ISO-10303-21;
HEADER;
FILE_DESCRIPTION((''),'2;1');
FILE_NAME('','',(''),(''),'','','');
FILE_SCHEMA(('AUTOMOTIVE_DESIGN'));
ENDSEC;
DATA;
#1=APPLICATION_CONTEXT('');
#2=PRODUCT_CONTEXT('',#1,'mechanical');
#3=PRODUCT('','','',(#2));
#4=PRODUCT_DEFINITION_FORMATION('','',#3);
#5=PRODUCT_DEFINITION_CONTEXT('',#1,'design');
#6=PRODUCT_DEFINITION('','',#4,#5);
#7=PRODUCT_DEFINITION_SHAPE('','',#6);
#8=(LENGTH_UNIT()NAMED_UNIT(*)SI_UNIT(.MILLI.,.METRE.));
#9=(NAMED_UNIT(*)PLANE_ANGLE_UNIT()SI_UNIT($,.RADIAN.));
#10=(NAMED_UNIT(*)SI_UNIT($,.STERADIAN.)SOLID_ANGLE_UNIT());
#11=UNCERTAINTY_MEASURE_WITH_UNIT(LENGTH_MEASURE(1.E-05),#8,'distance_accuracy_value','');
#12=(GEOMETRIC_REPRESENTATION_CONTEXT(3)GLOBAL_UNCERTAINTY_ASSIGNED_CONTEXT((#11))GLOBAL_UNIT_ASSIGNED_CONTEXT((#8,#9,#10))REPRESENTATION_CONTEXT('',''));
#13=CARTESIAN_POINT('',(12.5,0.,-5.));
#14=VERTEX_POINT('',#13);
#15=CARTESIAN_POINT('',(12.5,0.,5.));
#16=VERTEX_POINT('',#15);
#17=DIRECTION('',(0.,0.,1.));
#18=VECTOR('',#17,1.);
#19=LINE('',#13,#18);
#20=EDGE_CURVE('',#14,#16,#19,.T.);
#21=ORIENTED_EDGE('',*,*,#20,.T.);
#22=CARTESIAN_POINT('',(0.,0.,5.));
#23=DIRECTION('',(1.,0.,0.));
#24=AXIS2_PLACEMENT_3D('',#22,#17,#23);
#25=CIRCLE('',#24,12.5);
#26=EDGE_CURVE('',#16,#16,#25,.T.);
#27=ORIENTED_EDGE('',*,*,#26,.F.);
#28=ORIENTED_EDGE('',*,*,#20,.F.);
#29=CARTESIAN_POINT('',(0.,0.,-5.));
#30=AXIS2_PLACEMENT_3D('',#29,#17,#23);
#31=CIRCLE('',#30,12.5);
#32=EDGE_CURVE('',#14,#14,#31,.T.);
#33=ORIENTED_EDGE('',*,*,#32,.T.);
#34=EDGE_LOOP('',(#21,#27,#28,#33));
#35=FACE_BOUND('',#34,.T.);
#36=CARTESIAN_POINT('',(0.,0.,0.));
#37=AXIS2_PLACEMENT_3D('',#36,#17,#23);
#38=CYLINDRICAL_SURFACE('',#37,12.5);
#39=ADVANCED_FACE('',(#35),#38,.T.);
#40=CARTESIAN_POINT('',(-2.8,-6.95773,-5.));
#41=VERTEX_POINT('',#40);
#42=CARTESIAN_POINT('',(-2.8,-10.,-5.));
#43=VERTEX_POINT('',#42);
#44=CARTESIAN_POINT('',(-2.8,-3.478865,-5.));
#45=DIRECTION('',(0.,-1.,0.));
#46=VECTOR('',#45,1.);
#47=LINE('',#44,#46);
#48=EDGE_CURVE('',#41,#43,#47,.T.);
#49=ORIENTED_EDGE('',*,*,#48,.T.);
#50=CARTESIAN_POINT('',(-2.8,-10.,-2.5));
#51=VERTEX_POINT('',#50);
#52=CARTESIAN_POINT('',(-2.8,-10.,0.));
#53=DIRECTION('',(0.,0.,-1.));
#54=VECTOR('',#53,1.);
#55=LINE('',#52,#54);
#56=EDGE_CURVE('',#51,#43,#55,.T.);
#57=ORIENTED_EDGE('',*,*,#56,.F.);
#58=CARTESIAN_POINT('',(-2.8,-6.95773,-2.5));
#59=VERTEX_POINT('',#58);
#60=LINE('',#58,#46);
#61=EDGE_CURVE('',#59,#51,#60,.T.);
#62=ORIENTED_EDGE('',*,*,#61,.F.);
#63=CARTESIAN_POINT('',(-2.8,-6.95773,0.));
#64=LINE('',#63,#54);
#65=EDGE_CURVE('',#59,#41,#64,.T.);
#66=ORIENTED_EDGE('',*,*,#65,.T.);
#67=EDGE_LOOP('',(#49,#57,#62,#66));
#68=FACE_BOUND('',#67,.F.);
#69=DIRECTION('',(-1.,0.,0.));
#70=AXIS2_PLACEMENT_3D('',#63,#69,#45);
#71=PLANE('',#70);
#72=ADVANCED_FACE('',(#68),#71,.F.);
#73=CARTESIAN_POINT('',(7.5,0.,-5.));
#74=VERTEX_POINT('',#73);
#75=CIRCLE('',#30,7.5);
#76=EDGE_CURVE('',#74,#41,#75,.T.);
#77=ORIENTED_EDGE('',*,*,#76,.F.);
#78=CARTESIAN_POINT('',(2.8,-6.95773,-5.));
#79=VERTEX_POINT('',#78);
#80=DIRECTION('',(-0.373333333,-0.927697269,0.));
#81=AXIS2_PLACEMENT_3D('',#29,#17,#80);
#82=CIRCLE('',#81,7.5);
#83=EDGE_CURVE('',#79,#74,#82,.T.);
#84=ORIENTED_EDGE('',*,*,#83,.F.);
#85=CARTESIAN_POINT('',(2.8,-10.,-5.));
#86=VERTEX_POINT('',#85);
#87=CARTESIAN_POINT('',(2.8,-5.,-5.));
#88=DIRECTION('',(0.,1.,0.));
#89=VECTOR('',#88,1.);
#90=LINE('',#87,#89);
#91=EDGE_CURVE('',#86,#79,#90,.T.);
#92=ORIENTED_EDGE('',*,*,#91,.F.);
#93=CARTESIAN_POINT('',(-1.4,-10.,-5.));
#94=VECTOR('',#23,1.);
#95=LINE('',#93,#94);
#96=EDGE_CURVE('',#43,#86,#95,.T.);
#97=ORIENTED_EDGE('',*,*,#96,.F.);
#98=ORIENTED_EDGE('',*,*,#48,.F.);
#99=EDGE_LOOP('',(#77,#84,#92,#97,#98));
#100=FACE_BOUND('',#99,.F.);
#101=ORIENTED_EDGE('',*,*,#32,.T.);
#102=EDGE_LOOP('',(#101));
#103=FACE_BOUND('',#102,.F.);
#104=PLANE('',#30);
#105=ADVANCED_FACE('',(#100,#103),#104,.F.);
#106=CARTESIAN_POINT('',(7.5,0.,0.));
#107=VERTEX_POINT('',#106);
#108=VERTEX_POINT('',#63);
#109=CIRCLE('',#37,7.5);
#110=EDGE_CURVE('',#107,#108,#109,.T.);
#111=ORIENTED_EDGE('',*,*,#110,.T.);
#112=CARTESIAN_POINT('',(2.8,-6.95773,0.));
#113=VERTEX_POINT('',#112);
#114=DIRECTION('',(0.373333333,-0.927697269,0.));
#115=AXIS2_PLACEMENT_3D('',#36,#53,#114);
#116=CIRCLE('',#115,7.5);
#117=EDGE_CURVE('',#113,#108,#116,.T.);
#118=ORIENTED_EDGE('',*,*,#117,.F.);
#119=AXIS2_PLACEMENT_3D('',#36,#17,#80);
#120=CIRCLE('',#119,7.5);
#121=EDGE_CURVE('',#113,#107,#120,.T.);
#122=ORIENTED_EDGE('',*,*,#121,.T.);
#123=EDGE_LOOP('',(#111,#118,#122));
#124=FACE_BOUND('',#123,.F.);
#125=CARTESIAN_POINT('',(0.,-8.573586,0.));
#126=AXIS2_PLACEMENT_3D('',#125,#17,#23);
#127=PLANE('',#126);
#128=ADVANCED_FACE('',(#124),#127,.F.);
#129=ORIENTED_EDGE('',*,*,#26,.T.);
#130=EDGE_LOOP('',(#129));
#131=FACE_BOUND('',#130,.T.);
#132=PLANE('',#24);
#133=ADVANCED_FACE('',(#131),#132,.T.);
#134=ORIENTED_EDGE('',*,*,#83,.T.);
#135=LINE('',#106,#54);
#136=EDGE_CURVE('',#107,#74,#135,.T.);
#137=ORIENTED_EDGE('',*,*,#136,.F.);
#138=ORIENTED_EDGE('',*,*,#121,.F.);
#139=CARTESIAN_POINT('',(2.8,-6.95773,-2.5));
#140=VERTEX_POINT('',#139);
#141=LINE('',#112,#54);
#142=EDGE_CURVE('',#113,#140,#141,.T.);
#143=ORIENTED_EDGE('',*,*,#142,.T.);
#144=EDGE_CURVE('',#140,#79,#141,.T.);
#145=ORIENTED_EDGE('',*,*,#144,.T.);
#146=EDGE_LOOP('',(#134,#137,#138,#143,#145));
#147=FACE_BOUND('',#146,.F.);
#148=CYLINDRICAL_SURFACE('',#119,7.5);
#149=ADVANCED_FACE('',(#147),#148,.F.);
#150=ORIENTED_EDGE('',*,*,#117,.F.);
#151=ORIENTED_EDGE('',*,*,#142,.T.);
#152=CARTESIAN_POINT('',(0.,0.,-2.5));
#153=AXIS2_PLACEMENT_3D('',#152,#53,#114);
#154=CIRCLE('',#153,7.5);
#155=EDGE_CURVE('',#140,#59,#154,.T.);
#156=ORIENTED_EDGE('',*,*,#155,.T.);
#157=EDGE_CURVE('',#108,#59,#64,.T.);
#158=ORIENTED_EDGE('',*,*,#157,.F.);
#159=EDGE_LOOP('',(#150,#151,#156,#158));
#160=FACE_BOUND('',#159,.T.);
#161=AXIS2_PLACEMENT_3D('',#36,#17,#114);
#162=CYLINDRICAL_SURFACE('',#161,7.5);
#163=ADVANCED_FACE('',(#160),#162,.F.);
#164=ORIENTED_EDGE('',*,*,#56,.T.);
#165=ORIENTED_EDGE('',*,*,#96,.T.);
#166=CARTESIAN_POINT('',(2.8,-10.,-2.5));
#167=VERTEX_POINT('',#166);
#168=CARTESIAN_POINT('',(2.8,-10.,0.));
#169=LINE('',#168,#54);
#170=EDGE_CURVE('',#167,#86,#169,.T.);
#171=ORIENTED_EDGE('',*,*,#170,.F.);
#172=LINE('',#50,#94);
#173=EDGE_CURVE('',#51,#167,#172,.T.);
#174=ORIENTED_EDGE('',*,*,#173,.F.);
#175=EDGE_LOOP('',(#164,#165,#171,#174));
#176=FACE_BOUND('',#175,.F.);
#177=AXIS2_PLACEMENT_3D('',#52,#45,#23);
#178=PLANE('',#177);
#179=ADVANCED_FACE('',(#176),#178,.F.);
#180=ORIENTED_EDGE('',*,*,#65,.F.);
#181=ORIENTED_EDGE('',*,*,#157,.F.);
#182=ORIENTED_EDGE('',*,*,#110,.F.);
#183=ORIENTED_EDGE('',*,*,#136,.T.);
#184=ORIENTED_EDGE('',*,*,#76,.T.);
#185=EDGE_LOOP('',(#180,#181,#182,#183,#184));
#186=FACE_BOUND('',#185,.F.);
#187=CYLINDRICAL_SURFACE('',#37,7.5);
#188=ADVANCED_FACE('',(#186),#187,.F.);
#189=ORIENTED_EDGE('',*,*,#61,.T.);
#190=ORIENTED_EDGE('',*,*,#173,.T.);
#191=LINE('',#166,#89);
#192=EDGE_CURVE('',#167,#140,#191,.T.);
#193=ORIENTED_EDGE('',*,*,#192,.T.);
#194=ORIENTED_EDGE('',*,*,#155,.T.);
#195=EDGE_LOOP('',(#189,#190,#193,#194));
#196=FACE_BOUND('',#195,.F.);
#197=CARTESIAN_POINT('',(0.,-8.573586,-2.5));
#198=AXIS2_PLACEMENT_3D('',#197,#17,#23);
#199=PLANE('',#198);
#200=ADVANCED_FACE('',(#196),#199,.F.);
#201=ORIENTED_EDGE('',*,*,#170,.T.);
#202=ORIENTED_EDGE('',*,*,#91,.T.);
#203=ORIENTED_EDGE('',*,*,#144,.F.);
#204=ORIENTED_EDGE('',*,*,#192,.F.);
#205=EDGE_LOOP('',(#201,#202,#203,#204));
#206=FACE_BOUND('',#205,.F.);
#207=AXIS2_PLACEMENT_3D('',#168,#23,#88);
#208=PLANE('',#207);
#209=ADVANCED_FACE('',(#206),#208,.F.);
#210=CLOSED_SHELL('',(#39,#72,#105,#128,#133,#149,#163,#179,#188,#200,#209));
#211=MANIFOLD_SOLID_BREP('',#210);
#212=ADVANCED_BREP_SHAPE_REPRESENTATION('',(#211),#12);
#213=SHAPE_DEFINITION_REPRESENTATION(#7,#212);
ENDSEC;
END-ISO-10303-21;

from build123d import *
from build123d import SkipClean  # not in build123d's __all__

# Parameters (mm, degrees)
F0_R     = 12.5
F1_DEPTH = 5
F2_DEPTH = 5.001
F3_DEPTH = 2.5


with BuildPart() as f1:
    # F0 (on Top) → F1 (new body, symmetric)
    with BuildSketch(Plane.XY):
        Circle(F0_R)
        with BuildLine():
            ThreePointArc((-2.8, -6.9577295147), (-4.1982139059, 6.2149014473), (7.5, 0))
            ThreePointArc((7.5, 0), (6.2149014473, -4.1982139059), (2.8, -6.9577295147))
            Line((2.8, -6.9577295147), (2.8, -10))
            Line((2.8, -10), (0, -10))
            Line((0, -10), (-2.8, -10))
            Line((-2.8, -10), (-2.8, -6.9577295147))
        make_face(mode=Mode.SUBTRACT)
        with BuildLine():
            ThreePointArc((2.8, -6.9577295147), (6.2149014473, -4.1982139059), (7.5, 0))
            ThreePointArc((7.5, 0), (-4.1982139059, 6.2149014473), (-2.8, -6.9577295147))
            ThreePointArc((-2.8, -6.9577295147), (0, -7.5), (2.8, -6.9577295147))
        make_face()
        with BuildLine():
            ThreePointArc((2.8, -6.9577295147), (0, -7.5), (-2.8, -6.9577295147))
            Line((-2.8, -6.9577295147), (-2.8, -10))
            Line((-2.8, -10), (0, -10))
            Line((0, -10), (2.8, -10))
            Line((2.8, -10), (2.8, -6.9577295147))
        make_face()
    extrude(amount=F1_DEPTH, both=True)

    # F0 (on Top) → F2 (cut, through all)
    with BuildSketch(Plane.XY):
        with BuildLine():
            ThreePointArc((2.8, -6.9577295147), (0, -7.5), (-2.8, -6.9577295147))
            Line((-2.8, -6.9577295147), (-2.8, -10))
            Line((-2.8, -10), (0, -10))
            Line((0, -10), (2.8, -10))
            Line((2.8, -10), (2.8, -6.9577295147))
        make_face()
        with BuildLine():
            ThreePointArc((2.8, -6.9577295147), (6.2149014473, -4.1982139059), (7.5, 0))
            ThreePointArc((7.5, 0), (-4.1982139059, 6.2149014473), (-2.8, -6.9577295147))
            ThreePointArc((-2.8, -6.9577295147), (0, -7.5), (2.8, -6.9577295147))
        make_face()
    extrude(amount=-F2_DEPTH, mode=Mode.SUBTRACT)

    # F0 (on Top) → F3 (join)
    with BuildSketch(Plane.XY):
        with BuildLine():
            ThreePointArc((2.8, -6.9577295147), (0, -7.5), (-2.8, -6.9577295147))
            Line((-2.8, -6.9577295147), (-2.8, -10))
            Line((-2.8, -10), (0, -10))
            Line((0, -10), (2.8, -10))
            Line((2.8, -10), (2.8, -6.9577295147))
        make_face()
    with SkipClean():  # cleaning this boolean's faces spoils the solid; the shape is the same uncleaned
        extrude(amount=-F3_DEPTH)


solid = f1.part
